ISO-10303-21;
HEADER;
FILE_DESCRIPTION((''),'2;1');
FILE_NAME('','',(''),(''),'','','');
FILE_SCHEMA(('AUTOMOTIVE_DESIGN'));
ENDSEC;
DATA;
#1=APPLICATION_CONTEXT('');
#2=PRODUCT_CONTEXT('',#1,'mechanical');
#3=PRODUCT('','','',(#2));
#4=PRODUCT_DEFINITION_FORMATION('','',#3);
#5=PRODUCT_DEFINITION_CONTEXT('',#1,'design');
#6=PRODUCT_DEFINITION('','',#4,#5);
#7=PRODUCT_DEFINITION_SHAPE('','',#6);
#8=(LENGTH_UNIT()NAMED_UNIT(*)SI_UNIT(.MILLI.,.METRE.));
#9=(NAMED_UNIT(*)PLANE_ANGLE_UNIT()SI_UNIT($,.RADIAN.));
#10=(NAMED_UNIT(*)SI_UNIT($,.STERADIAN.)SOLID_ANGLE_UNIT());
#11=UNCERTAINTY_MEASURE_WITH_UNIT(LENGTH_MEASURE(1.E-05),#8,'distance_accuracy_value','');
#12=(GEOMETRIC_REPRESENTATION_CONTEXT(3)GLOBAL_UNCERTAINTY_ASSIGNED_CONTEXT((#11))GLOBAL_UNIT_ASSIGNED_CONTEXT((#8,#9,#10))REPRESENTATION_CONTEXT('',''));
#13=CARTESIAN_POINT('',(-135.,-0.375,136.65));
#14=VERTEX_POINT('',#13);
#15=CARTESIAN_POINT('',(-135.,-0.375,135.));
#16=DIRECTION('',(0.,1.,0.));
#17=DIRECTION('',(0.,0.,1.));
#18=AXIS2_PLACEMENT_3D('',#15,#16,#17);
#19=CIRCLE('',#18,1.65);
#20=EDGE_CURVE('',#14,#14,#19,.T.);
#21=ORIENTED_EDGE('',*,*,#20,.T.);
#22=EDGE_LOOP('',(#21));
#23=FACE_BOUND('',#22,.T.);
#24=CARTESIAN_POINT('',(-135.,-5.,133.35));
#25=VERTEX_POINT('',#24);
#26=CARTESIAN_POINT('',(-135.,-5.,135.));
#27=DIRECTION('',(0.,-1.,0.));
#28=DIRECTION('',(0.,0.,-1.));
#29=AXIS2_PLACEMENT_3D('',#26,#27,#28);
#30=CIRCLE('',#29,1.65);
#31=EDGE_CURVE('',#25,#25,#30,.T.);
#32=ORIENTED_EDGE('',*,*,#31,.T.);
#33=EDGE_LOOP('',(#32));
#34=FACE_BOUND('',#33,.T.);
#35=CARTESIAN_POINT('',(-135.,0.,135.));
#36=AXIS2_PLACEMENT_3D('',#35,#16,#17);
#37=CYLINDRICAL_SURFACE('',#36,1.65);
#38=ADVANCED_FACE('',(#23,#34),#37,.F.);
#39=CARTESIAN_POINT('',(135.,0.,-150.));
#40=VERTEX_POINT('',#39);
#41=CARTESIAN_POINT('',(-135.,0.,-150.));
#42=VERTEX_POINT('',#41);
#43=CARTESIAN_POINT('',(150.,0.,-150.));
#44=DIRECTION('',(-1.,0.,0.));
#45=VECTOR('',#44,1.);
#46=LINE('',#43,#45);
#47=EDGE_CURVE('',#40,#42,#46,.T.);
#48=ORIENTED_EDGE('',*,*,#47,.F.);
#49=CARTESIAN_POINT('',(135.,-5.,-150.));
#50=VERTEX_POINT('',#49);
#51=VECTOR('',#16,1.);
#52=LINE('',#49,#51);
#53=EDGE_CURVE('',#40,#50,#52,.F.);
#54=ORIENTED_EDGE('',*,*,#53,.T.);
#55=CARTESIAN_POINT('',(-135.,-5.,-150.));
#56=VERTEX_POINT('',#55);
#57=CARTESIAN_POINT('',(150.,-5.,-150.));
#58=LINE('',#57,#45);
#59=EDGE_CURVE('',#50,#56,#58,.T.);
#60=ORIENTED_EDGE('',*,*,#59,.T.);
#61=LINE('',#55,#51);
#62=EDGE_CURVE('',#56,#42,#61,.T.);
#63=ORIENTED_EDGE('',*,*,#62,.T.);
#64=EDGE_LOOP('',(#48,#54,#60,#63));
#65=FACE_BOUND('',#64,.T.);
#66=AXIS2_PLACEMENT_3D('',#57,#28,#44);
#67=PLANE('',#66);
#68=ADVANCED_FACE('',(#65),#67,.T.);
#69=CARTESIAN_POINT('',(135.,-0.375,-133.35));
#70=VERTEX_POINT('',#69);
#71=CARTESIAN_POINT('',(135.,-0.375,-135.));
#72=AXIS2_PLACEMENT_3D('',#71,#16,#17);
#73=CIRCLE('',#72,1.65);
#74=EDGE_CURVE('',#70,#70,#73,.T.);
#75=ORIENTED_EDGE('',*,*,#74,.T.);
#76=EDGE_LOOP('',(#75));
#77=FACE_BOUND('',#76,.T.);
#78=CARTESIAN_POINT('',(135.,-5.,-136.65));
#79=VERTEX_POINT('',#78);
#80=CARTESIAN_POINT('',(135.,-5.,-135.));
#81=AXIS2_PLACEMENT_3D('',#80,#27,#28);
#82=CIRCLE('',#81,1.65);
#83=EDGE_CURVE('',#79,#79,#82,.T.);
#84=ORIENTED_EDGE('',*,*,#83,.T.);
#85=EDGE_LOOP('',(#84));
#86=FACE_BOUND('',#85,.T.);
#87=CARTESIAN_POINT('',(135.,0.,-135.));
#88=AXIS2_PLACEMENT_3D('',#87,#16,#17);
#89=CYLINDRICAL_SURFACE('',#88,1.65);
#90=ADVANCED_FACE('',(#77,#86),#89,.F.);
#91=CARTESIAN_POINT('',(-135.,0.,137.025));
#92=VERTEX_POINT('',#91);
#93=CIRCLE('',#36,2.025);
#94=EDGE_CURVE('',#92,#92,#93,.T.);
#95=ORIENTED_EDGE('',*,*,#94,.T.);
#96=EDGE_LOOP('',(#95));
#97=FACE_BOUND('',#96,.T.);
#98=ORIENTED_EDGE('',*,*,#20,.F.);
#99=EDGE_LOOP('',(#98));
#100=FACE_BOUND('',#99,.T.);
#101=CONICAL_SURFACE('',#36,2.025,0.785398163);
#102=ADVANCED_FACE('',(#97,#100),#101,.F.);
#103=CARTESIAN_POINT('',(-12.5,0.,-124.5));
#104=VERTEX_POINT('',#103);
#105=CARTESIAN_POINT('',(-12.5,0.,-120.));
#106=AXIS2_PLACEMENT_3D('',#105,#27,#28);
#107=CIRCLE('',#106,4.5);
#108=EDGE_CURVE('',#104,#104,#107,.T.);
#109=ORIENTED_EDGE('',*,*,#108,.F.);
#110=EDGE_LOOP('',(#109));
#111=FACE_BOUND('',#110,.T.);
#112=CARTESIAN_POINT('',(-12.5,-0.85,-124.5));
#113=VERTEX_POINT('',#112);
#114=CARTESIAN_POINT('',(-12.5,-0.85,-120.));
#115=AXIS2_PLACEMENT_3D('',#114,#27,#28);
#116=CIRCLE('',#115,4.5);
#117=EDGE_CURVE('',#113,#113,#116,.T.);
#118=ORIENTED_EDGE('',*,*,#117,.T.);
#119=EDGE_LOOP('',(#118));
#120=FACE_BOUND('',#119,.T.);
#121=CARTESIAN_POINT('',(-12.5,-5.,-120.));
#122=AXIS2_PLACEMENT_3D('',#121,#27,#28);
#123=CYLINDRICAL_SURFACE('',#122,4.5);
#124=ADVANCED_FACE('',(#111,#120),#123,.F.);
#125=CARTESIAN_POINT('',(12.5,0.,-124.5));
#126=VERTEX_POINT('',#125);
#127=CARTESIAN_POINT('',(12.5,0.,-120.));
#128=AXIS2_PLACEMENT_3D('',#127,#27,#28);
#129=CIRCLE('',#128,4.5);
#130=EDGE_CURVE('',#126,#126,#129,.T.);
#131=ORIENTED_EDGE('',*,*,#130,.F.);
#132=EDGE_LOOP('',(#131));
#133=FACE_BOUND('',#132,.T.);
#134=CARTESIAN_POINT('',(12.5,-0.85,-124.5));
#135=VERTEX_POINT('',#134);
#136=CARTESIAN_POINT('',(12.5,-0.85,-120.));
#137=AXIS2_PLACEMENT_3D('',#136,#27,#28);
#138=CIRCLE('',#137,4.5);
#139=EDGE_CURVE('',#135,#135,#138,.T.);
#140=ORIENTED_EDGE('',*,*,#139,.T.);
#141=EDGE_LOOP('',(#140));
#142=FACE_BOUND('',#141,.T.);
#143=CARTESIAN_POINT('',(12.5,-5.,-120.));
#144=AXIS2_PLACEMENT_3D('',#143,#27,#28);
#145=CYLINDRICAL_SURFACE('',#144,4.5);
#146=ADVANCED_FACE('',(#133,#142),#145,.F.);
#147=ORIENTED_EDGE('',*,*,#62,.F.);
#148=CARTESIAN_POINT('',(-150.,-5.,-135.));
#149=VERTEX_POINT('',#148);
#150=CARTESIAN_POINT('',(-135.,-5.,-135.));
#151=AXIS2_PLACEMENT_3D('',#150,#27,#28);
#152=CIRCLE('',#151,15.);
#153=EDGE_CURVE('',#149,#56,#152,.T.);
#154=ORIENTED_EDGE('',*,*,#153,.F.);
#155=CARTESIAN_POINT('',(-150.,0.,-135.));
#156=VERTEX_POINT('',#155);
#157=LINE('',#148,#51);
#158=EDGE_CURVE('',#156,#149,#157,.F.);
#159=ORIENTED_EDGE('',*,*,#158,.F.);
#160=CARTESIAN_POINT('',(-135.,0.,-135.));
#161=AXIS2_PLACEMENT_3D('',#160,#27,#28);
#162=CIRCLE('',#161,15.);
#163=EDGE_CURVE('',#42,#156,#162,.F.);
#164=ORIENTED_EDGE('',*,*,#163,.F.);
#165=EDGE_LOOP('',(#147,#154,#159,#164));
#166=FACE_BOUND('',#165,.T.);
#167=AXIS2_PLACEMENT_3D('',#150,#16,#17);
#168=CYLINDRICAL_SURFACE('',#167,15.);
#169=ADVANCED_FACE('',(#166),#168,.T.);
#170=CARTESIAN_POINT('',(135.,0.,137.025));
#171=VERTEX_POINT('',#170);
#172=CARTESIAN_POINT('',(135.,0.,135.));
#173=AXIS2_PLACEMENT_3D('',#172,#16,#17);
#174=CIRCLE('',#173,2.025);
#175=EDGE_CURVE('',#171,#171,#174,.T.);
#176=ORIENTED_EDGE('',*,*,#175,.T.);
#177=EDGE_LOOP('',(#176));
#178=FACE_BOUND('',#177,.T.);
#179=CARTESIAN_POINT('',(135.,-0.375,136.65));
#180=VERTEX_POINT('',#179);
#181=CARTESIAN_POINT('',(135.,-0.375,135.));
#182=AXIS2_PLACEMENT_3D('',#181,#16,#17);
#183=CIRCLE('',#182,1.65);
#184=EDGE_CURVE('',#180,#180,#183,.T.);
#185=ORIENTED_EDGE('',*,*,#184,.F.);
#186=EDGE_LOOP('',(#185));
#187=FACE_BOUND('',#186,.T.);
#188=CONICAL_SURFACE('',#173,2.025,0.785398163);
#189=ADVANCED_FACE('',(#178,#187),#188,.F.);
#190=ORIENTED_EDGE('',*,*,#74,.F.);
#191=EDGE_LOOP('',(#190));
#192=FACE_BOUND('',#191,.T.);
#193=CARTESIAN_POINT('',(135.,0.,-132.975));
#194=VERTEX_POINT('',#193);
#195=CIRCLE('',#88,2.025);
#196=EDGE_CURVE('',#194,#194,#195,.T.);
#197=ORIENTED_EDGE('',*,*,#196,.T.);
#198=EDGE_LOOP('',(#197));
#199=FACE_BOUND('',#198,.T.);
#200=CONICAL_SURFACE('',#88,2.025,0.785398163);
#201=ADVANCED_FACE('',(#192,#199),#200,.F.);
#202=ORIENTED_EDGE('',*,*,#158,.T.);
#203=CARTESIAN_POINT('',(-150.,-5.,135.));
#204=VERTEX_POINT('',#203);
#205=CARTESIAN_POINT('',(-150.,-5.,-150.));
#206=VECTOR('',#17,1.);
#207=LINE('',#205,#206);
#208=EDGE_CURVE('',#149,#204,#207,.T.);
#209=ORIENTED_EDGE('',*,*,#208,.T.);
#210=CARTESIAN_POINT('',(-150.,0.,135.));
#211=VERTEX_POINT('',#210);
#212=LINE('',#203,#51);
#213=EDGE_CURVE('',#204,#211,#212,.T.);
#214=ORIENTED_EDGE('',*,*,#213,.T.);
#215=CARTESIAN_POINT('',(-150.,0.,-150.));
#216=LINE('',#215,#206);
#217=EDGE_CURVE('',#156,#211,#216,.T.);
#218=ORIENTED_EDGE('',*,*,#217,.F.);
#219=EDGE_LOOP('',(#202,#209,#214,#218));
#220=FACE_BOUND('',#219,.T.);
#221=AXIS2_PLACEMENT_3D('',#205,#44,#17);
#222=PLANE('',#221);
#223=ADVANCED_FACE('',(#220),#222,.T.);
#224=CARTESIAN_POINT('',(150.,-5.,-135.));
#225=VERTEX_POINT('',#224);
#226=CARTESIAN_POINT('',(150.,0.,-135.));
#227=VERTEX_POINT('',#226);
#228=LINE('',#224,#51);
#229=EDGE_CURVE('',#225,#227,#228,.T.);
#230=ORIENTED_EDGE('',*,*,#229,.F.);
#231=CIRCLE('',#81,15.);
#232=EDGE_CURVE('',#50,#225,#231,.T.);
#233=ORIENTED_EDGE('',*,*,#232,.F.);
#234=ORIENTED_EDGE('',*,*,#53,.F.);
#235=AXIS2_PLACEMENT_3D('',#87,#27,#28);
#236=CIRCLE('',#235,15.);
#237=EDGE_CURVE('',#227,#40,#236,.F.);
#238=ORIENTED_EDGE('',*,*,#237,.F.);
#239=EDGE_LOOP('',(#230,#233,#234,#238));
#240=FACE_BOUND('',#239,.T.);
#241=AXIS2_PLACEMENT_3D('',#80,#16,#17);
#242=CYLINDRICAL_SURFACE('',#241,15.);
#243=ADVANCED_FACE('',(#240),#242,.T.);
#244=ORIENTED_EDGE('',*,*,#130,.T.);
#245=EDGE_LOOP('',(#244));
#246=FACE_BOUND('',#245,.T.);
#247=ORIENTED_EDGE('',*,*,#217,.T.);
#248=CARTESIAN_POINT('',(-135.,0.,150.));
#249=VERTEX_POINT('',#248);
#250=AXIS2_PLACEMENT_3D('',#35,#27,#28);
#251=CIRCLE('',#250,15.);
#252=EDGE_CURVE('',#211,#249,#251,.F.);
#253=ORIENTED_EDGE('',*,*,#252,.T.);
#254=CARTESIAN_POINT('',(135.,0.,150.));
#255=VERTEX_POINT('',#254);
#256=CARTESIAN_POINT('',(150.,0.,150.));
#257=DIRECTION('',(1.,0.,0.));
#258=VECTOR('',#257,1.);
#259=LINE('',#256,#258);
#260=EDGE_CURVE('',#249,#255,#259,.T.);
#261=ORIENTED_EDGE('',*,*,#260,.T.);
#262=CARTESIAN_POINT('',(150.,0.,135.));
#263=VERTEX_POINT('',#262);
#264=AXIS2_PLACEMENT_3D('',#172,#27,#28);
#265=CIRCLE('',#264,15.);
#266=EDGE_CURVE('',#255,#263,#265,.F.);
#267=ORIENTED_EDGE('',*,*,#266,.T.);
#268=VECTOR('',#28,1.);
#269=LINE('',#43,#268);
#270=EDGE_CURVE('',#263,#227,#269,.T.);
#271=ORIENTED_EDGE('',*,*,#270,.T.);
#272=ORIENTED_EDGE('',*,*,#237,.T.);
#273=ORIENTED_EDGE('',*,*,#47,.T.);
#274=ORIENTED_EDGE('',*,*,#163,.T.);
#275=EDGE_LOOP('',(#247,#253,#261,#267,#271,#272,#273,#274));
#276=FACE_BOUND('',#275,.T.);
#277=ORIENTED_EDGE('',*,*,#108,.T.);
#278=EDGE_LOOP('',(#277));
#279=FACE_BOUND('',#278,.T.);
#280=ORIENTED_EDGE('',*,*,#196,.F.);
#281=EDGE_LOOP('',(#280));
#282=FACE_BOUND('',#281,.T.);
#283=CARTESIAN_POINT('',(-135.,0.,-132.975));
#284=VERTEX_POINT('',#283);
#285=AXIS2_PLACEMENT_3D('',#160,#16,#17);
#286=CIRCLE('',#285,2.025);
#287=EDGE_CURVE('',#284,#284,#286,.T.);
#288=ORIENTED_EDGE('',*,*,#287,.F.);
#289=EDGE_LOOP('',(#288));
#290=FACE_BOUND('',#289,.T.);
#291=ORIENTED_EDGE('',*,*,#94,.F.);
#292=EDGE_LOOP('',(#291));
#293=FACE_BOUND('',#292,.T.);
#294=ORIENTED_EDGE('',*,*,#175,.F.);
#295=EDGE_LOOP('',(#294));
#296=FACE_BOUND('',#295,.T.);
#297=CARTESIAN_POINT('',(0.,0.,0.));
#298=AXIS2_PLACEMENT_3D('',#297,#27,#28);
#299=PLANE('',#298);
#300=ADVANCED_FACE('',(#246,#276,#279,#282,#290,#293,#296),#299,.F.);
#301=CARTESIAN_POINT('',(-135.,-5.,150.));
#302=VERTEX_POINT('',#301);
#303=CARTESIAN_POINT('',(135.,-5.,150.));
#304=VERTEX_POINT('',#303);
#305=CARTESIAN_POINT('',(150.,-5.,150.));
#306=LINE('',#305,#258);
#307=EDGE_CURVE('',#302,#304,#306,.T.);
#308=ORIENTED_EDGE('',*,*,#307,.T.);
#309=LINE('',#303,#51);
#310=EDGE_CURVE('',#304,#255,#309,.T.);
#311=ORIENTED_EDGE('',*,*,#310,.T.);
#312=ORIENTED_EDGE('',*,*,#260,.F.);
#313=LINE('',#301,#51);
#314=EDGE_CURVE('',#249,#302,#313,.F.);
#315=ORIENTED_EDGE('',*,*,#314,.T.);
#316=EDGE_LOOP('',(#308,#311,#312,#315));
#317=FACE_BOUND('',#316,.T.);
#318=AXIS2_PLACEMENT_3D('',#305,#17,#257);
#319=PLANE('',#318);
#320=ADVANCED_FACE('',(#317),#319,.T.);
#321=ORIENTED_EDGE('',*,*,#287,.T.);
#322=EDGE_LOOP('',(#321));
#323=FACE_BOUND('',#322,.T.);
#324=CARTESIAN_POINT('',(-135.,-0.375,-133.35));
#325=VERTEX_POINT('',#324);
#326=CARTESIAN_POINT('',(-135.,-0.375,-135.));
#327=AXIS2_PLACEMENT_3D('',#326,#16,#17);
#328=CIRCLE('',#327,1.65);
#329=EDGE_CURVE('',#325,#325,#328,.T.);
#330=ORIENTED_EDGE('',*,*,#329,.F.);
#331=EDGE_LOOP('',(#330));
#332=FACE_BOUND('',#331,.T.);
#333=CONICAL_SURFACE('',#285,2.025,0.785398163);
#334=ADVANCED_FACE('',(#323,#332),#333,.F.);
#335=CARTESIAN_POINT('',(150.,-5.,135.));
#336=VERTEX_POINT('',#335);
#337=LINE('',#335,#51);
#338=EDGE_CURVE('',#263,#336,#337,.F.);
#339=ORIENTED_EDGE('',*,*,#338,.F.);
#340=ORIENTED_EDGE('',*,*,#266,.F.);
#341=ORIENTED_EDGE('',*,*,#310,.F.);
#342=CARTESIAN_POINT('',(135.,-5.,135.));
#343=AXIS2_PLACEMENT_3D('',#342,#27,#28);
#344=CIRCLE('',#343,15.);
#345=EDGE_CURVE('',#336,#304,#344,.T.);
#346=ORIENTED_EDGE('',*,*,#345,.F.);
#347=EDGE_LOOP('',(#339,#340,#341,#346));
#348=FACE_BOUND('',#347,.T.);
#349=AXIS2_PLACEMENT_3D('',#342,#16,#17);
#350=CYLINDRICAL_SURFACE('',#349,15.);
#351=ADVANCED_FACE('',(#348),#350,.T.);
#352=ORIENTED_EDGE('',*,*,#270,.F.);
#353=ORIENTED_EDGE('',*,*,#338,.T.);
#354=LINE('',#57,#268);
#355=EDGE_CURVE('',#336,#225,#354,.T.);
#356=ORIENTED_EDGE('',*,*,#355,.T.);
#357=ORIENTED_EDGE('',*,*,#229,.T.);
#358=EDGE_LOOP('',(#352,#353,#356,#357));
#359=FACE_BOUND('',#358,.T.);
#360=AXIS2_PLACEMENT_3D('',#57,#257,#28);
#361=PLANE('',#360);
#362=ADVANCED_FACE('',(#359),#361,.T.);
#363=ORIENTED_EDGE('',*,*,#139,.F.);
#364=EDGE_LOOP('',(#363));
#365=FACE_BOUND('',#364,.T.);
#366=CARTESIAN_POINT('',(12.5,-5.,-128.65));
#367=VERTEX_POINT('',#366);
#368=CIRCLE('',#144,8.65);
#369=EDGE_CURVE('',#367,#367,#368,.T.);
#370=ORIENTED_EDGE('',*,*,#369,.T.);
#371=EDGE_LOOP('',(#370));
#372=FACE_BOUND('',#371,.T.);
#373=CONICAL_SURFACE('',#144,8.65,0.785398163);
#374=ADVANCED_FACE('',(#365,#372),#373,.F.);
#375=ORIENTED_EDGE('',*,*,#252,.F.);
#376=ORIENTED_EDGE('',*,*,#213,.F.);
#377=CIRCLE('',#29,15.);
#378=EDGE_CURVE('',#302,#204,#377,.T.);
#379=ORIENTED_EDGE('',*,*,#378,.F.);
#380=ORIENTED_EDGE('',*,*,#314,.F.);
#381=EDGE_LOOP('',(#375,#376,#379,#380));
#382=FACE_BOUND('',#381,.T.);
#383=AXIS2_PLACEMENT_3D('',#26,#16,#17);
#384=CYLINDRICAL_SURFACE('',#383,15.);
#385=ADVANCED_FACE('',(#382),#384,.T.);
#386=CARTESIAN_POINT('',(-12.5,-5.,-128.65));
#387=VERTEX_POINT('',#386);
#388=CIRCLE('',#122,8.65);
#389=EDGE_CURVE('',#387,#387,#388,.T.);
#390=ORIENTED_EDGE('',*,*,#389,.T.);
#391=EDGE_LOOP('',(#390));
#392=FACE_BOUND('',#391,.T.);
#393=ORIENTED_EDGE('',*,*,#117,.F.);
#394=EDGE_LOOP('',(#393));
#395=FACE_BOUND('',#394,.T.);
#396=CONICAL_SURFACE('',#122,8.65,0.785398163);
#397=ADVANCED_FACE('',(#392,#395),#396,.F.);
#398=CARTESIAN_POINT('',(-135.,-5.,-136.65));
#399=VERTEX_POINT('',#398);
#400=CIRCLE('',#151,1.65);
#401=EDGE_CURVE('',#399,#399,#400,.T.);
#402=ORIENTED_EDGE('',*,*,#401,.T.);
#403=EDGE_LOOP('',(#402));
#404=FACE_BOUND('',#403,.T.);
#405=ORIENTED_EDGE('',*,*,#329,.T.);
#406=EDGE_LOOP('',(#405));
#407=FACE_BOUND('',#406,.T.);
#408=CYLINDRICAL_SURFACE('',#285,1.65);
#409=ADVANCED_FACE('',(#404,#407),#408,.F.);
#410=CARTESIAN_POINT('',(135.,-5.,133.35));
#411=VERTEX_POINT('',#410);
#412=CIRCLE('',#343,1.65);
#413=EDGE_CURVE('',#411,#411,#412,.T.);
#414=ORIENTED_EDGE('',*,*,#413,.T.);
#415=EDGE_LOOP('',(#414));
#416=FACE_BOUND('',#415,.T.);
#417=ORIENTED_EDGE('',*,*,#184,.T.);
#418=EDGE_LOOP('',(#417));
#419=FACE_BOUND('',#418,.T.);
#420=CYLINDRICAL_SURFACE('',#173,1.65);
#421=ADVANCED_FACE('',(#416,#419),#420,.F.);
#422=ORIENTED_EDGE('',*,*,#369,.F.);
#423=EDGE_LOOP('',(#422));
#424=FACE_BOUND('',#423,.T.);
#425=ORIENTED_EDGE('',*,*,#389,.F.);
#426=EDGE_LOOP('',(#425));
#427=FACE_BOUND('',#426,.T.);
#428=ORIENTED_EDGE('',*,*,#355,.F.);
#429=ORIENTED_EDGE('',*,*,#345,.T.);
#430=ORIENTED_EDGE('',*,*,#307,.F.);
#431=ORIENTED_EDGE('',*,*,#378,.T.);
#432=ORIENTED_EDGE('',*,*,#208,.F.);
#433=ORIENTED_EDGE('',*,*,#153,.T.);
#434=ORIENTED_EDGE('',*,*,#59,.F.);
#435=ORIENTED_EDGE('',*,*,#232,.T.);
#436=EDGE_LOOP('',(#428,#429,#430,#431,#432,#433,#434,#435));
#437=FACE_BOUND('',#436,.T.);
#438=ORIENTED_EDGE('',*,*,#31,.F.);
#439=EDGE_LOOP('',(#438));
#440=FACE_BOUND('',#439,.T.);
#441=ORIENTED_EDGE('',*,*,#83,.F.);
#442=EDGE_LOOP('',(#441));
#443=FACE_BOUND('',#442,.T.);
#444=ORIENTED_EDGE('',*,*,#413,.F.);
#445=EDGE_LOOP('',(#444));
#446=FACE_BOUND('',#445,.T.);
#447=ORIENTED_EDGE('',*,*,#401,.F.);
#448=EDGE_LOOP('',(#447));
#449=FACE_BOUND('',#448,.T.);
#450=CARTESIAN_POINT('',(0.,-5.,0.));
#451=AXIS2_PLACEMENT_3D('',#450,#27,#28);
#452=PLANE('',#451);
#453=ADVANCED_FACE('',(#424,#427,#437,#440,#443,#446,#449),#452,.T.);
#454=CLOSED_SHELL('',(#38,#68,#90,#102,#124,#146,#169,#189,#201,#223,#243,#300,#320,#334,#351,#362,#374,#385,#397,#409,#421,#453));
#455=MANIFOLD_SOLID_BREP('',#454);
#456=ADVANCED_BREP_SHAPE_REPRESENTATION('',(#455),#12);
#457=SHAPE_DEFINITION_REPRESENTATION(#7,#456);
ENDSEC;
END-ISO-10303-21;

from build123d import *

# Parameters (mm, degrees)
ESQUISSE1_W                                 = 300
ESQUISSE1_H                                 = 300
T_LE_DE_BASE_PLI_E1_DEPTH                   = 5
FRAISAGE_POUR_VIS_T_TE_FRAIS_E_M81_AT_COUNT = 2
FRAISAGE_POUR_VIS_T_TE_FRAIS_E_M81_AT_PITCH = 25
TROU_TARAUD_M41_D                           = 3.3
TROU_TARAUD_M41_CSINK_D                     = 4.05
TROU_TARAUD_M41_CSINK_ANGLE                 = 90
CONG_1_R                                    = 15


# Sheet-metal steps are written as plain solids
with BuildPart() as part:
    # Esquisse1 → Tôle de base pliée1 (new body)
    with BuildSketch(Plane(origin=(0, 0, 0), x_dir=(1, 0, 0), z_dir=(0, 1, 0))):
        Rectangle(ESQUISSE1_W, ESQUISSE1_H)
    extrude(amount=-T_LE_DE_BASE_PLI_E1_DEPTH)

    # Esquisse3 → Fraisage pour vis à tête fraisée M81 (revolve, cut)
    with BuildSketch(Plane(origin=(12.5, -5, -120), x_dir=(0, 0, -1), z_dir=(1, 0, 0))):
        Polygon((0, 0), (0, 5), (4.5, 5), (4.5, 4.15), (8.65, 0), align=None)
    fraisage_pour_vis_t_te_frais_e_m81 = revolve(axis=Axis((12.5, -11.35, -120), (0, 1, 0)), mode=Mode.SUBTRACT)

    # Fraisage pour vis à tête fraisée M81 at: Fraisage pour vis à tête fraisée M81 ×2
    with Locations(*[(-i * FRAISAGE_POUR_VIS_T_TE_FRAIS_E_M81_AT_PITCH, 0, 0) for i in range(1, FRAISAGE_POUR_VIS_T_TE_FRAIS_E_M81_AT_COUNT)]):
        add(fraisage_pour_vis_t_te_frais_e_m81, mode=Mode.SUBTRACT)

    # Trou taraudé M41 (through all)
    with Locations(Plane(origin=(0, 0, 0), x_dir=(1, 0, 0), z_dir=(0, 1, 0))):
        with Locations((135, -135), (-135, -135), (-135, 135), (135, 135)):
            CounterSinkHole(TROU_TARAUD_M41_D / 2, TROU_TARAUD_M41_CSINK_D / 2, counter_sink_angle=TROU_TARAUD_M41_CSINK_ANGLE)

    # Congé1
    cong_1_edges = [part.edges().sort_by_distance(p)[0] for p in [
        (-150, -2.5, -150),
        (150, -2.5, -150),
        (150, -2.5, 150),
        (-150, -2.5, 150),
    ]]
    fillet(cong_1_edges, radius=CONG_1_R)


solid = part.part
